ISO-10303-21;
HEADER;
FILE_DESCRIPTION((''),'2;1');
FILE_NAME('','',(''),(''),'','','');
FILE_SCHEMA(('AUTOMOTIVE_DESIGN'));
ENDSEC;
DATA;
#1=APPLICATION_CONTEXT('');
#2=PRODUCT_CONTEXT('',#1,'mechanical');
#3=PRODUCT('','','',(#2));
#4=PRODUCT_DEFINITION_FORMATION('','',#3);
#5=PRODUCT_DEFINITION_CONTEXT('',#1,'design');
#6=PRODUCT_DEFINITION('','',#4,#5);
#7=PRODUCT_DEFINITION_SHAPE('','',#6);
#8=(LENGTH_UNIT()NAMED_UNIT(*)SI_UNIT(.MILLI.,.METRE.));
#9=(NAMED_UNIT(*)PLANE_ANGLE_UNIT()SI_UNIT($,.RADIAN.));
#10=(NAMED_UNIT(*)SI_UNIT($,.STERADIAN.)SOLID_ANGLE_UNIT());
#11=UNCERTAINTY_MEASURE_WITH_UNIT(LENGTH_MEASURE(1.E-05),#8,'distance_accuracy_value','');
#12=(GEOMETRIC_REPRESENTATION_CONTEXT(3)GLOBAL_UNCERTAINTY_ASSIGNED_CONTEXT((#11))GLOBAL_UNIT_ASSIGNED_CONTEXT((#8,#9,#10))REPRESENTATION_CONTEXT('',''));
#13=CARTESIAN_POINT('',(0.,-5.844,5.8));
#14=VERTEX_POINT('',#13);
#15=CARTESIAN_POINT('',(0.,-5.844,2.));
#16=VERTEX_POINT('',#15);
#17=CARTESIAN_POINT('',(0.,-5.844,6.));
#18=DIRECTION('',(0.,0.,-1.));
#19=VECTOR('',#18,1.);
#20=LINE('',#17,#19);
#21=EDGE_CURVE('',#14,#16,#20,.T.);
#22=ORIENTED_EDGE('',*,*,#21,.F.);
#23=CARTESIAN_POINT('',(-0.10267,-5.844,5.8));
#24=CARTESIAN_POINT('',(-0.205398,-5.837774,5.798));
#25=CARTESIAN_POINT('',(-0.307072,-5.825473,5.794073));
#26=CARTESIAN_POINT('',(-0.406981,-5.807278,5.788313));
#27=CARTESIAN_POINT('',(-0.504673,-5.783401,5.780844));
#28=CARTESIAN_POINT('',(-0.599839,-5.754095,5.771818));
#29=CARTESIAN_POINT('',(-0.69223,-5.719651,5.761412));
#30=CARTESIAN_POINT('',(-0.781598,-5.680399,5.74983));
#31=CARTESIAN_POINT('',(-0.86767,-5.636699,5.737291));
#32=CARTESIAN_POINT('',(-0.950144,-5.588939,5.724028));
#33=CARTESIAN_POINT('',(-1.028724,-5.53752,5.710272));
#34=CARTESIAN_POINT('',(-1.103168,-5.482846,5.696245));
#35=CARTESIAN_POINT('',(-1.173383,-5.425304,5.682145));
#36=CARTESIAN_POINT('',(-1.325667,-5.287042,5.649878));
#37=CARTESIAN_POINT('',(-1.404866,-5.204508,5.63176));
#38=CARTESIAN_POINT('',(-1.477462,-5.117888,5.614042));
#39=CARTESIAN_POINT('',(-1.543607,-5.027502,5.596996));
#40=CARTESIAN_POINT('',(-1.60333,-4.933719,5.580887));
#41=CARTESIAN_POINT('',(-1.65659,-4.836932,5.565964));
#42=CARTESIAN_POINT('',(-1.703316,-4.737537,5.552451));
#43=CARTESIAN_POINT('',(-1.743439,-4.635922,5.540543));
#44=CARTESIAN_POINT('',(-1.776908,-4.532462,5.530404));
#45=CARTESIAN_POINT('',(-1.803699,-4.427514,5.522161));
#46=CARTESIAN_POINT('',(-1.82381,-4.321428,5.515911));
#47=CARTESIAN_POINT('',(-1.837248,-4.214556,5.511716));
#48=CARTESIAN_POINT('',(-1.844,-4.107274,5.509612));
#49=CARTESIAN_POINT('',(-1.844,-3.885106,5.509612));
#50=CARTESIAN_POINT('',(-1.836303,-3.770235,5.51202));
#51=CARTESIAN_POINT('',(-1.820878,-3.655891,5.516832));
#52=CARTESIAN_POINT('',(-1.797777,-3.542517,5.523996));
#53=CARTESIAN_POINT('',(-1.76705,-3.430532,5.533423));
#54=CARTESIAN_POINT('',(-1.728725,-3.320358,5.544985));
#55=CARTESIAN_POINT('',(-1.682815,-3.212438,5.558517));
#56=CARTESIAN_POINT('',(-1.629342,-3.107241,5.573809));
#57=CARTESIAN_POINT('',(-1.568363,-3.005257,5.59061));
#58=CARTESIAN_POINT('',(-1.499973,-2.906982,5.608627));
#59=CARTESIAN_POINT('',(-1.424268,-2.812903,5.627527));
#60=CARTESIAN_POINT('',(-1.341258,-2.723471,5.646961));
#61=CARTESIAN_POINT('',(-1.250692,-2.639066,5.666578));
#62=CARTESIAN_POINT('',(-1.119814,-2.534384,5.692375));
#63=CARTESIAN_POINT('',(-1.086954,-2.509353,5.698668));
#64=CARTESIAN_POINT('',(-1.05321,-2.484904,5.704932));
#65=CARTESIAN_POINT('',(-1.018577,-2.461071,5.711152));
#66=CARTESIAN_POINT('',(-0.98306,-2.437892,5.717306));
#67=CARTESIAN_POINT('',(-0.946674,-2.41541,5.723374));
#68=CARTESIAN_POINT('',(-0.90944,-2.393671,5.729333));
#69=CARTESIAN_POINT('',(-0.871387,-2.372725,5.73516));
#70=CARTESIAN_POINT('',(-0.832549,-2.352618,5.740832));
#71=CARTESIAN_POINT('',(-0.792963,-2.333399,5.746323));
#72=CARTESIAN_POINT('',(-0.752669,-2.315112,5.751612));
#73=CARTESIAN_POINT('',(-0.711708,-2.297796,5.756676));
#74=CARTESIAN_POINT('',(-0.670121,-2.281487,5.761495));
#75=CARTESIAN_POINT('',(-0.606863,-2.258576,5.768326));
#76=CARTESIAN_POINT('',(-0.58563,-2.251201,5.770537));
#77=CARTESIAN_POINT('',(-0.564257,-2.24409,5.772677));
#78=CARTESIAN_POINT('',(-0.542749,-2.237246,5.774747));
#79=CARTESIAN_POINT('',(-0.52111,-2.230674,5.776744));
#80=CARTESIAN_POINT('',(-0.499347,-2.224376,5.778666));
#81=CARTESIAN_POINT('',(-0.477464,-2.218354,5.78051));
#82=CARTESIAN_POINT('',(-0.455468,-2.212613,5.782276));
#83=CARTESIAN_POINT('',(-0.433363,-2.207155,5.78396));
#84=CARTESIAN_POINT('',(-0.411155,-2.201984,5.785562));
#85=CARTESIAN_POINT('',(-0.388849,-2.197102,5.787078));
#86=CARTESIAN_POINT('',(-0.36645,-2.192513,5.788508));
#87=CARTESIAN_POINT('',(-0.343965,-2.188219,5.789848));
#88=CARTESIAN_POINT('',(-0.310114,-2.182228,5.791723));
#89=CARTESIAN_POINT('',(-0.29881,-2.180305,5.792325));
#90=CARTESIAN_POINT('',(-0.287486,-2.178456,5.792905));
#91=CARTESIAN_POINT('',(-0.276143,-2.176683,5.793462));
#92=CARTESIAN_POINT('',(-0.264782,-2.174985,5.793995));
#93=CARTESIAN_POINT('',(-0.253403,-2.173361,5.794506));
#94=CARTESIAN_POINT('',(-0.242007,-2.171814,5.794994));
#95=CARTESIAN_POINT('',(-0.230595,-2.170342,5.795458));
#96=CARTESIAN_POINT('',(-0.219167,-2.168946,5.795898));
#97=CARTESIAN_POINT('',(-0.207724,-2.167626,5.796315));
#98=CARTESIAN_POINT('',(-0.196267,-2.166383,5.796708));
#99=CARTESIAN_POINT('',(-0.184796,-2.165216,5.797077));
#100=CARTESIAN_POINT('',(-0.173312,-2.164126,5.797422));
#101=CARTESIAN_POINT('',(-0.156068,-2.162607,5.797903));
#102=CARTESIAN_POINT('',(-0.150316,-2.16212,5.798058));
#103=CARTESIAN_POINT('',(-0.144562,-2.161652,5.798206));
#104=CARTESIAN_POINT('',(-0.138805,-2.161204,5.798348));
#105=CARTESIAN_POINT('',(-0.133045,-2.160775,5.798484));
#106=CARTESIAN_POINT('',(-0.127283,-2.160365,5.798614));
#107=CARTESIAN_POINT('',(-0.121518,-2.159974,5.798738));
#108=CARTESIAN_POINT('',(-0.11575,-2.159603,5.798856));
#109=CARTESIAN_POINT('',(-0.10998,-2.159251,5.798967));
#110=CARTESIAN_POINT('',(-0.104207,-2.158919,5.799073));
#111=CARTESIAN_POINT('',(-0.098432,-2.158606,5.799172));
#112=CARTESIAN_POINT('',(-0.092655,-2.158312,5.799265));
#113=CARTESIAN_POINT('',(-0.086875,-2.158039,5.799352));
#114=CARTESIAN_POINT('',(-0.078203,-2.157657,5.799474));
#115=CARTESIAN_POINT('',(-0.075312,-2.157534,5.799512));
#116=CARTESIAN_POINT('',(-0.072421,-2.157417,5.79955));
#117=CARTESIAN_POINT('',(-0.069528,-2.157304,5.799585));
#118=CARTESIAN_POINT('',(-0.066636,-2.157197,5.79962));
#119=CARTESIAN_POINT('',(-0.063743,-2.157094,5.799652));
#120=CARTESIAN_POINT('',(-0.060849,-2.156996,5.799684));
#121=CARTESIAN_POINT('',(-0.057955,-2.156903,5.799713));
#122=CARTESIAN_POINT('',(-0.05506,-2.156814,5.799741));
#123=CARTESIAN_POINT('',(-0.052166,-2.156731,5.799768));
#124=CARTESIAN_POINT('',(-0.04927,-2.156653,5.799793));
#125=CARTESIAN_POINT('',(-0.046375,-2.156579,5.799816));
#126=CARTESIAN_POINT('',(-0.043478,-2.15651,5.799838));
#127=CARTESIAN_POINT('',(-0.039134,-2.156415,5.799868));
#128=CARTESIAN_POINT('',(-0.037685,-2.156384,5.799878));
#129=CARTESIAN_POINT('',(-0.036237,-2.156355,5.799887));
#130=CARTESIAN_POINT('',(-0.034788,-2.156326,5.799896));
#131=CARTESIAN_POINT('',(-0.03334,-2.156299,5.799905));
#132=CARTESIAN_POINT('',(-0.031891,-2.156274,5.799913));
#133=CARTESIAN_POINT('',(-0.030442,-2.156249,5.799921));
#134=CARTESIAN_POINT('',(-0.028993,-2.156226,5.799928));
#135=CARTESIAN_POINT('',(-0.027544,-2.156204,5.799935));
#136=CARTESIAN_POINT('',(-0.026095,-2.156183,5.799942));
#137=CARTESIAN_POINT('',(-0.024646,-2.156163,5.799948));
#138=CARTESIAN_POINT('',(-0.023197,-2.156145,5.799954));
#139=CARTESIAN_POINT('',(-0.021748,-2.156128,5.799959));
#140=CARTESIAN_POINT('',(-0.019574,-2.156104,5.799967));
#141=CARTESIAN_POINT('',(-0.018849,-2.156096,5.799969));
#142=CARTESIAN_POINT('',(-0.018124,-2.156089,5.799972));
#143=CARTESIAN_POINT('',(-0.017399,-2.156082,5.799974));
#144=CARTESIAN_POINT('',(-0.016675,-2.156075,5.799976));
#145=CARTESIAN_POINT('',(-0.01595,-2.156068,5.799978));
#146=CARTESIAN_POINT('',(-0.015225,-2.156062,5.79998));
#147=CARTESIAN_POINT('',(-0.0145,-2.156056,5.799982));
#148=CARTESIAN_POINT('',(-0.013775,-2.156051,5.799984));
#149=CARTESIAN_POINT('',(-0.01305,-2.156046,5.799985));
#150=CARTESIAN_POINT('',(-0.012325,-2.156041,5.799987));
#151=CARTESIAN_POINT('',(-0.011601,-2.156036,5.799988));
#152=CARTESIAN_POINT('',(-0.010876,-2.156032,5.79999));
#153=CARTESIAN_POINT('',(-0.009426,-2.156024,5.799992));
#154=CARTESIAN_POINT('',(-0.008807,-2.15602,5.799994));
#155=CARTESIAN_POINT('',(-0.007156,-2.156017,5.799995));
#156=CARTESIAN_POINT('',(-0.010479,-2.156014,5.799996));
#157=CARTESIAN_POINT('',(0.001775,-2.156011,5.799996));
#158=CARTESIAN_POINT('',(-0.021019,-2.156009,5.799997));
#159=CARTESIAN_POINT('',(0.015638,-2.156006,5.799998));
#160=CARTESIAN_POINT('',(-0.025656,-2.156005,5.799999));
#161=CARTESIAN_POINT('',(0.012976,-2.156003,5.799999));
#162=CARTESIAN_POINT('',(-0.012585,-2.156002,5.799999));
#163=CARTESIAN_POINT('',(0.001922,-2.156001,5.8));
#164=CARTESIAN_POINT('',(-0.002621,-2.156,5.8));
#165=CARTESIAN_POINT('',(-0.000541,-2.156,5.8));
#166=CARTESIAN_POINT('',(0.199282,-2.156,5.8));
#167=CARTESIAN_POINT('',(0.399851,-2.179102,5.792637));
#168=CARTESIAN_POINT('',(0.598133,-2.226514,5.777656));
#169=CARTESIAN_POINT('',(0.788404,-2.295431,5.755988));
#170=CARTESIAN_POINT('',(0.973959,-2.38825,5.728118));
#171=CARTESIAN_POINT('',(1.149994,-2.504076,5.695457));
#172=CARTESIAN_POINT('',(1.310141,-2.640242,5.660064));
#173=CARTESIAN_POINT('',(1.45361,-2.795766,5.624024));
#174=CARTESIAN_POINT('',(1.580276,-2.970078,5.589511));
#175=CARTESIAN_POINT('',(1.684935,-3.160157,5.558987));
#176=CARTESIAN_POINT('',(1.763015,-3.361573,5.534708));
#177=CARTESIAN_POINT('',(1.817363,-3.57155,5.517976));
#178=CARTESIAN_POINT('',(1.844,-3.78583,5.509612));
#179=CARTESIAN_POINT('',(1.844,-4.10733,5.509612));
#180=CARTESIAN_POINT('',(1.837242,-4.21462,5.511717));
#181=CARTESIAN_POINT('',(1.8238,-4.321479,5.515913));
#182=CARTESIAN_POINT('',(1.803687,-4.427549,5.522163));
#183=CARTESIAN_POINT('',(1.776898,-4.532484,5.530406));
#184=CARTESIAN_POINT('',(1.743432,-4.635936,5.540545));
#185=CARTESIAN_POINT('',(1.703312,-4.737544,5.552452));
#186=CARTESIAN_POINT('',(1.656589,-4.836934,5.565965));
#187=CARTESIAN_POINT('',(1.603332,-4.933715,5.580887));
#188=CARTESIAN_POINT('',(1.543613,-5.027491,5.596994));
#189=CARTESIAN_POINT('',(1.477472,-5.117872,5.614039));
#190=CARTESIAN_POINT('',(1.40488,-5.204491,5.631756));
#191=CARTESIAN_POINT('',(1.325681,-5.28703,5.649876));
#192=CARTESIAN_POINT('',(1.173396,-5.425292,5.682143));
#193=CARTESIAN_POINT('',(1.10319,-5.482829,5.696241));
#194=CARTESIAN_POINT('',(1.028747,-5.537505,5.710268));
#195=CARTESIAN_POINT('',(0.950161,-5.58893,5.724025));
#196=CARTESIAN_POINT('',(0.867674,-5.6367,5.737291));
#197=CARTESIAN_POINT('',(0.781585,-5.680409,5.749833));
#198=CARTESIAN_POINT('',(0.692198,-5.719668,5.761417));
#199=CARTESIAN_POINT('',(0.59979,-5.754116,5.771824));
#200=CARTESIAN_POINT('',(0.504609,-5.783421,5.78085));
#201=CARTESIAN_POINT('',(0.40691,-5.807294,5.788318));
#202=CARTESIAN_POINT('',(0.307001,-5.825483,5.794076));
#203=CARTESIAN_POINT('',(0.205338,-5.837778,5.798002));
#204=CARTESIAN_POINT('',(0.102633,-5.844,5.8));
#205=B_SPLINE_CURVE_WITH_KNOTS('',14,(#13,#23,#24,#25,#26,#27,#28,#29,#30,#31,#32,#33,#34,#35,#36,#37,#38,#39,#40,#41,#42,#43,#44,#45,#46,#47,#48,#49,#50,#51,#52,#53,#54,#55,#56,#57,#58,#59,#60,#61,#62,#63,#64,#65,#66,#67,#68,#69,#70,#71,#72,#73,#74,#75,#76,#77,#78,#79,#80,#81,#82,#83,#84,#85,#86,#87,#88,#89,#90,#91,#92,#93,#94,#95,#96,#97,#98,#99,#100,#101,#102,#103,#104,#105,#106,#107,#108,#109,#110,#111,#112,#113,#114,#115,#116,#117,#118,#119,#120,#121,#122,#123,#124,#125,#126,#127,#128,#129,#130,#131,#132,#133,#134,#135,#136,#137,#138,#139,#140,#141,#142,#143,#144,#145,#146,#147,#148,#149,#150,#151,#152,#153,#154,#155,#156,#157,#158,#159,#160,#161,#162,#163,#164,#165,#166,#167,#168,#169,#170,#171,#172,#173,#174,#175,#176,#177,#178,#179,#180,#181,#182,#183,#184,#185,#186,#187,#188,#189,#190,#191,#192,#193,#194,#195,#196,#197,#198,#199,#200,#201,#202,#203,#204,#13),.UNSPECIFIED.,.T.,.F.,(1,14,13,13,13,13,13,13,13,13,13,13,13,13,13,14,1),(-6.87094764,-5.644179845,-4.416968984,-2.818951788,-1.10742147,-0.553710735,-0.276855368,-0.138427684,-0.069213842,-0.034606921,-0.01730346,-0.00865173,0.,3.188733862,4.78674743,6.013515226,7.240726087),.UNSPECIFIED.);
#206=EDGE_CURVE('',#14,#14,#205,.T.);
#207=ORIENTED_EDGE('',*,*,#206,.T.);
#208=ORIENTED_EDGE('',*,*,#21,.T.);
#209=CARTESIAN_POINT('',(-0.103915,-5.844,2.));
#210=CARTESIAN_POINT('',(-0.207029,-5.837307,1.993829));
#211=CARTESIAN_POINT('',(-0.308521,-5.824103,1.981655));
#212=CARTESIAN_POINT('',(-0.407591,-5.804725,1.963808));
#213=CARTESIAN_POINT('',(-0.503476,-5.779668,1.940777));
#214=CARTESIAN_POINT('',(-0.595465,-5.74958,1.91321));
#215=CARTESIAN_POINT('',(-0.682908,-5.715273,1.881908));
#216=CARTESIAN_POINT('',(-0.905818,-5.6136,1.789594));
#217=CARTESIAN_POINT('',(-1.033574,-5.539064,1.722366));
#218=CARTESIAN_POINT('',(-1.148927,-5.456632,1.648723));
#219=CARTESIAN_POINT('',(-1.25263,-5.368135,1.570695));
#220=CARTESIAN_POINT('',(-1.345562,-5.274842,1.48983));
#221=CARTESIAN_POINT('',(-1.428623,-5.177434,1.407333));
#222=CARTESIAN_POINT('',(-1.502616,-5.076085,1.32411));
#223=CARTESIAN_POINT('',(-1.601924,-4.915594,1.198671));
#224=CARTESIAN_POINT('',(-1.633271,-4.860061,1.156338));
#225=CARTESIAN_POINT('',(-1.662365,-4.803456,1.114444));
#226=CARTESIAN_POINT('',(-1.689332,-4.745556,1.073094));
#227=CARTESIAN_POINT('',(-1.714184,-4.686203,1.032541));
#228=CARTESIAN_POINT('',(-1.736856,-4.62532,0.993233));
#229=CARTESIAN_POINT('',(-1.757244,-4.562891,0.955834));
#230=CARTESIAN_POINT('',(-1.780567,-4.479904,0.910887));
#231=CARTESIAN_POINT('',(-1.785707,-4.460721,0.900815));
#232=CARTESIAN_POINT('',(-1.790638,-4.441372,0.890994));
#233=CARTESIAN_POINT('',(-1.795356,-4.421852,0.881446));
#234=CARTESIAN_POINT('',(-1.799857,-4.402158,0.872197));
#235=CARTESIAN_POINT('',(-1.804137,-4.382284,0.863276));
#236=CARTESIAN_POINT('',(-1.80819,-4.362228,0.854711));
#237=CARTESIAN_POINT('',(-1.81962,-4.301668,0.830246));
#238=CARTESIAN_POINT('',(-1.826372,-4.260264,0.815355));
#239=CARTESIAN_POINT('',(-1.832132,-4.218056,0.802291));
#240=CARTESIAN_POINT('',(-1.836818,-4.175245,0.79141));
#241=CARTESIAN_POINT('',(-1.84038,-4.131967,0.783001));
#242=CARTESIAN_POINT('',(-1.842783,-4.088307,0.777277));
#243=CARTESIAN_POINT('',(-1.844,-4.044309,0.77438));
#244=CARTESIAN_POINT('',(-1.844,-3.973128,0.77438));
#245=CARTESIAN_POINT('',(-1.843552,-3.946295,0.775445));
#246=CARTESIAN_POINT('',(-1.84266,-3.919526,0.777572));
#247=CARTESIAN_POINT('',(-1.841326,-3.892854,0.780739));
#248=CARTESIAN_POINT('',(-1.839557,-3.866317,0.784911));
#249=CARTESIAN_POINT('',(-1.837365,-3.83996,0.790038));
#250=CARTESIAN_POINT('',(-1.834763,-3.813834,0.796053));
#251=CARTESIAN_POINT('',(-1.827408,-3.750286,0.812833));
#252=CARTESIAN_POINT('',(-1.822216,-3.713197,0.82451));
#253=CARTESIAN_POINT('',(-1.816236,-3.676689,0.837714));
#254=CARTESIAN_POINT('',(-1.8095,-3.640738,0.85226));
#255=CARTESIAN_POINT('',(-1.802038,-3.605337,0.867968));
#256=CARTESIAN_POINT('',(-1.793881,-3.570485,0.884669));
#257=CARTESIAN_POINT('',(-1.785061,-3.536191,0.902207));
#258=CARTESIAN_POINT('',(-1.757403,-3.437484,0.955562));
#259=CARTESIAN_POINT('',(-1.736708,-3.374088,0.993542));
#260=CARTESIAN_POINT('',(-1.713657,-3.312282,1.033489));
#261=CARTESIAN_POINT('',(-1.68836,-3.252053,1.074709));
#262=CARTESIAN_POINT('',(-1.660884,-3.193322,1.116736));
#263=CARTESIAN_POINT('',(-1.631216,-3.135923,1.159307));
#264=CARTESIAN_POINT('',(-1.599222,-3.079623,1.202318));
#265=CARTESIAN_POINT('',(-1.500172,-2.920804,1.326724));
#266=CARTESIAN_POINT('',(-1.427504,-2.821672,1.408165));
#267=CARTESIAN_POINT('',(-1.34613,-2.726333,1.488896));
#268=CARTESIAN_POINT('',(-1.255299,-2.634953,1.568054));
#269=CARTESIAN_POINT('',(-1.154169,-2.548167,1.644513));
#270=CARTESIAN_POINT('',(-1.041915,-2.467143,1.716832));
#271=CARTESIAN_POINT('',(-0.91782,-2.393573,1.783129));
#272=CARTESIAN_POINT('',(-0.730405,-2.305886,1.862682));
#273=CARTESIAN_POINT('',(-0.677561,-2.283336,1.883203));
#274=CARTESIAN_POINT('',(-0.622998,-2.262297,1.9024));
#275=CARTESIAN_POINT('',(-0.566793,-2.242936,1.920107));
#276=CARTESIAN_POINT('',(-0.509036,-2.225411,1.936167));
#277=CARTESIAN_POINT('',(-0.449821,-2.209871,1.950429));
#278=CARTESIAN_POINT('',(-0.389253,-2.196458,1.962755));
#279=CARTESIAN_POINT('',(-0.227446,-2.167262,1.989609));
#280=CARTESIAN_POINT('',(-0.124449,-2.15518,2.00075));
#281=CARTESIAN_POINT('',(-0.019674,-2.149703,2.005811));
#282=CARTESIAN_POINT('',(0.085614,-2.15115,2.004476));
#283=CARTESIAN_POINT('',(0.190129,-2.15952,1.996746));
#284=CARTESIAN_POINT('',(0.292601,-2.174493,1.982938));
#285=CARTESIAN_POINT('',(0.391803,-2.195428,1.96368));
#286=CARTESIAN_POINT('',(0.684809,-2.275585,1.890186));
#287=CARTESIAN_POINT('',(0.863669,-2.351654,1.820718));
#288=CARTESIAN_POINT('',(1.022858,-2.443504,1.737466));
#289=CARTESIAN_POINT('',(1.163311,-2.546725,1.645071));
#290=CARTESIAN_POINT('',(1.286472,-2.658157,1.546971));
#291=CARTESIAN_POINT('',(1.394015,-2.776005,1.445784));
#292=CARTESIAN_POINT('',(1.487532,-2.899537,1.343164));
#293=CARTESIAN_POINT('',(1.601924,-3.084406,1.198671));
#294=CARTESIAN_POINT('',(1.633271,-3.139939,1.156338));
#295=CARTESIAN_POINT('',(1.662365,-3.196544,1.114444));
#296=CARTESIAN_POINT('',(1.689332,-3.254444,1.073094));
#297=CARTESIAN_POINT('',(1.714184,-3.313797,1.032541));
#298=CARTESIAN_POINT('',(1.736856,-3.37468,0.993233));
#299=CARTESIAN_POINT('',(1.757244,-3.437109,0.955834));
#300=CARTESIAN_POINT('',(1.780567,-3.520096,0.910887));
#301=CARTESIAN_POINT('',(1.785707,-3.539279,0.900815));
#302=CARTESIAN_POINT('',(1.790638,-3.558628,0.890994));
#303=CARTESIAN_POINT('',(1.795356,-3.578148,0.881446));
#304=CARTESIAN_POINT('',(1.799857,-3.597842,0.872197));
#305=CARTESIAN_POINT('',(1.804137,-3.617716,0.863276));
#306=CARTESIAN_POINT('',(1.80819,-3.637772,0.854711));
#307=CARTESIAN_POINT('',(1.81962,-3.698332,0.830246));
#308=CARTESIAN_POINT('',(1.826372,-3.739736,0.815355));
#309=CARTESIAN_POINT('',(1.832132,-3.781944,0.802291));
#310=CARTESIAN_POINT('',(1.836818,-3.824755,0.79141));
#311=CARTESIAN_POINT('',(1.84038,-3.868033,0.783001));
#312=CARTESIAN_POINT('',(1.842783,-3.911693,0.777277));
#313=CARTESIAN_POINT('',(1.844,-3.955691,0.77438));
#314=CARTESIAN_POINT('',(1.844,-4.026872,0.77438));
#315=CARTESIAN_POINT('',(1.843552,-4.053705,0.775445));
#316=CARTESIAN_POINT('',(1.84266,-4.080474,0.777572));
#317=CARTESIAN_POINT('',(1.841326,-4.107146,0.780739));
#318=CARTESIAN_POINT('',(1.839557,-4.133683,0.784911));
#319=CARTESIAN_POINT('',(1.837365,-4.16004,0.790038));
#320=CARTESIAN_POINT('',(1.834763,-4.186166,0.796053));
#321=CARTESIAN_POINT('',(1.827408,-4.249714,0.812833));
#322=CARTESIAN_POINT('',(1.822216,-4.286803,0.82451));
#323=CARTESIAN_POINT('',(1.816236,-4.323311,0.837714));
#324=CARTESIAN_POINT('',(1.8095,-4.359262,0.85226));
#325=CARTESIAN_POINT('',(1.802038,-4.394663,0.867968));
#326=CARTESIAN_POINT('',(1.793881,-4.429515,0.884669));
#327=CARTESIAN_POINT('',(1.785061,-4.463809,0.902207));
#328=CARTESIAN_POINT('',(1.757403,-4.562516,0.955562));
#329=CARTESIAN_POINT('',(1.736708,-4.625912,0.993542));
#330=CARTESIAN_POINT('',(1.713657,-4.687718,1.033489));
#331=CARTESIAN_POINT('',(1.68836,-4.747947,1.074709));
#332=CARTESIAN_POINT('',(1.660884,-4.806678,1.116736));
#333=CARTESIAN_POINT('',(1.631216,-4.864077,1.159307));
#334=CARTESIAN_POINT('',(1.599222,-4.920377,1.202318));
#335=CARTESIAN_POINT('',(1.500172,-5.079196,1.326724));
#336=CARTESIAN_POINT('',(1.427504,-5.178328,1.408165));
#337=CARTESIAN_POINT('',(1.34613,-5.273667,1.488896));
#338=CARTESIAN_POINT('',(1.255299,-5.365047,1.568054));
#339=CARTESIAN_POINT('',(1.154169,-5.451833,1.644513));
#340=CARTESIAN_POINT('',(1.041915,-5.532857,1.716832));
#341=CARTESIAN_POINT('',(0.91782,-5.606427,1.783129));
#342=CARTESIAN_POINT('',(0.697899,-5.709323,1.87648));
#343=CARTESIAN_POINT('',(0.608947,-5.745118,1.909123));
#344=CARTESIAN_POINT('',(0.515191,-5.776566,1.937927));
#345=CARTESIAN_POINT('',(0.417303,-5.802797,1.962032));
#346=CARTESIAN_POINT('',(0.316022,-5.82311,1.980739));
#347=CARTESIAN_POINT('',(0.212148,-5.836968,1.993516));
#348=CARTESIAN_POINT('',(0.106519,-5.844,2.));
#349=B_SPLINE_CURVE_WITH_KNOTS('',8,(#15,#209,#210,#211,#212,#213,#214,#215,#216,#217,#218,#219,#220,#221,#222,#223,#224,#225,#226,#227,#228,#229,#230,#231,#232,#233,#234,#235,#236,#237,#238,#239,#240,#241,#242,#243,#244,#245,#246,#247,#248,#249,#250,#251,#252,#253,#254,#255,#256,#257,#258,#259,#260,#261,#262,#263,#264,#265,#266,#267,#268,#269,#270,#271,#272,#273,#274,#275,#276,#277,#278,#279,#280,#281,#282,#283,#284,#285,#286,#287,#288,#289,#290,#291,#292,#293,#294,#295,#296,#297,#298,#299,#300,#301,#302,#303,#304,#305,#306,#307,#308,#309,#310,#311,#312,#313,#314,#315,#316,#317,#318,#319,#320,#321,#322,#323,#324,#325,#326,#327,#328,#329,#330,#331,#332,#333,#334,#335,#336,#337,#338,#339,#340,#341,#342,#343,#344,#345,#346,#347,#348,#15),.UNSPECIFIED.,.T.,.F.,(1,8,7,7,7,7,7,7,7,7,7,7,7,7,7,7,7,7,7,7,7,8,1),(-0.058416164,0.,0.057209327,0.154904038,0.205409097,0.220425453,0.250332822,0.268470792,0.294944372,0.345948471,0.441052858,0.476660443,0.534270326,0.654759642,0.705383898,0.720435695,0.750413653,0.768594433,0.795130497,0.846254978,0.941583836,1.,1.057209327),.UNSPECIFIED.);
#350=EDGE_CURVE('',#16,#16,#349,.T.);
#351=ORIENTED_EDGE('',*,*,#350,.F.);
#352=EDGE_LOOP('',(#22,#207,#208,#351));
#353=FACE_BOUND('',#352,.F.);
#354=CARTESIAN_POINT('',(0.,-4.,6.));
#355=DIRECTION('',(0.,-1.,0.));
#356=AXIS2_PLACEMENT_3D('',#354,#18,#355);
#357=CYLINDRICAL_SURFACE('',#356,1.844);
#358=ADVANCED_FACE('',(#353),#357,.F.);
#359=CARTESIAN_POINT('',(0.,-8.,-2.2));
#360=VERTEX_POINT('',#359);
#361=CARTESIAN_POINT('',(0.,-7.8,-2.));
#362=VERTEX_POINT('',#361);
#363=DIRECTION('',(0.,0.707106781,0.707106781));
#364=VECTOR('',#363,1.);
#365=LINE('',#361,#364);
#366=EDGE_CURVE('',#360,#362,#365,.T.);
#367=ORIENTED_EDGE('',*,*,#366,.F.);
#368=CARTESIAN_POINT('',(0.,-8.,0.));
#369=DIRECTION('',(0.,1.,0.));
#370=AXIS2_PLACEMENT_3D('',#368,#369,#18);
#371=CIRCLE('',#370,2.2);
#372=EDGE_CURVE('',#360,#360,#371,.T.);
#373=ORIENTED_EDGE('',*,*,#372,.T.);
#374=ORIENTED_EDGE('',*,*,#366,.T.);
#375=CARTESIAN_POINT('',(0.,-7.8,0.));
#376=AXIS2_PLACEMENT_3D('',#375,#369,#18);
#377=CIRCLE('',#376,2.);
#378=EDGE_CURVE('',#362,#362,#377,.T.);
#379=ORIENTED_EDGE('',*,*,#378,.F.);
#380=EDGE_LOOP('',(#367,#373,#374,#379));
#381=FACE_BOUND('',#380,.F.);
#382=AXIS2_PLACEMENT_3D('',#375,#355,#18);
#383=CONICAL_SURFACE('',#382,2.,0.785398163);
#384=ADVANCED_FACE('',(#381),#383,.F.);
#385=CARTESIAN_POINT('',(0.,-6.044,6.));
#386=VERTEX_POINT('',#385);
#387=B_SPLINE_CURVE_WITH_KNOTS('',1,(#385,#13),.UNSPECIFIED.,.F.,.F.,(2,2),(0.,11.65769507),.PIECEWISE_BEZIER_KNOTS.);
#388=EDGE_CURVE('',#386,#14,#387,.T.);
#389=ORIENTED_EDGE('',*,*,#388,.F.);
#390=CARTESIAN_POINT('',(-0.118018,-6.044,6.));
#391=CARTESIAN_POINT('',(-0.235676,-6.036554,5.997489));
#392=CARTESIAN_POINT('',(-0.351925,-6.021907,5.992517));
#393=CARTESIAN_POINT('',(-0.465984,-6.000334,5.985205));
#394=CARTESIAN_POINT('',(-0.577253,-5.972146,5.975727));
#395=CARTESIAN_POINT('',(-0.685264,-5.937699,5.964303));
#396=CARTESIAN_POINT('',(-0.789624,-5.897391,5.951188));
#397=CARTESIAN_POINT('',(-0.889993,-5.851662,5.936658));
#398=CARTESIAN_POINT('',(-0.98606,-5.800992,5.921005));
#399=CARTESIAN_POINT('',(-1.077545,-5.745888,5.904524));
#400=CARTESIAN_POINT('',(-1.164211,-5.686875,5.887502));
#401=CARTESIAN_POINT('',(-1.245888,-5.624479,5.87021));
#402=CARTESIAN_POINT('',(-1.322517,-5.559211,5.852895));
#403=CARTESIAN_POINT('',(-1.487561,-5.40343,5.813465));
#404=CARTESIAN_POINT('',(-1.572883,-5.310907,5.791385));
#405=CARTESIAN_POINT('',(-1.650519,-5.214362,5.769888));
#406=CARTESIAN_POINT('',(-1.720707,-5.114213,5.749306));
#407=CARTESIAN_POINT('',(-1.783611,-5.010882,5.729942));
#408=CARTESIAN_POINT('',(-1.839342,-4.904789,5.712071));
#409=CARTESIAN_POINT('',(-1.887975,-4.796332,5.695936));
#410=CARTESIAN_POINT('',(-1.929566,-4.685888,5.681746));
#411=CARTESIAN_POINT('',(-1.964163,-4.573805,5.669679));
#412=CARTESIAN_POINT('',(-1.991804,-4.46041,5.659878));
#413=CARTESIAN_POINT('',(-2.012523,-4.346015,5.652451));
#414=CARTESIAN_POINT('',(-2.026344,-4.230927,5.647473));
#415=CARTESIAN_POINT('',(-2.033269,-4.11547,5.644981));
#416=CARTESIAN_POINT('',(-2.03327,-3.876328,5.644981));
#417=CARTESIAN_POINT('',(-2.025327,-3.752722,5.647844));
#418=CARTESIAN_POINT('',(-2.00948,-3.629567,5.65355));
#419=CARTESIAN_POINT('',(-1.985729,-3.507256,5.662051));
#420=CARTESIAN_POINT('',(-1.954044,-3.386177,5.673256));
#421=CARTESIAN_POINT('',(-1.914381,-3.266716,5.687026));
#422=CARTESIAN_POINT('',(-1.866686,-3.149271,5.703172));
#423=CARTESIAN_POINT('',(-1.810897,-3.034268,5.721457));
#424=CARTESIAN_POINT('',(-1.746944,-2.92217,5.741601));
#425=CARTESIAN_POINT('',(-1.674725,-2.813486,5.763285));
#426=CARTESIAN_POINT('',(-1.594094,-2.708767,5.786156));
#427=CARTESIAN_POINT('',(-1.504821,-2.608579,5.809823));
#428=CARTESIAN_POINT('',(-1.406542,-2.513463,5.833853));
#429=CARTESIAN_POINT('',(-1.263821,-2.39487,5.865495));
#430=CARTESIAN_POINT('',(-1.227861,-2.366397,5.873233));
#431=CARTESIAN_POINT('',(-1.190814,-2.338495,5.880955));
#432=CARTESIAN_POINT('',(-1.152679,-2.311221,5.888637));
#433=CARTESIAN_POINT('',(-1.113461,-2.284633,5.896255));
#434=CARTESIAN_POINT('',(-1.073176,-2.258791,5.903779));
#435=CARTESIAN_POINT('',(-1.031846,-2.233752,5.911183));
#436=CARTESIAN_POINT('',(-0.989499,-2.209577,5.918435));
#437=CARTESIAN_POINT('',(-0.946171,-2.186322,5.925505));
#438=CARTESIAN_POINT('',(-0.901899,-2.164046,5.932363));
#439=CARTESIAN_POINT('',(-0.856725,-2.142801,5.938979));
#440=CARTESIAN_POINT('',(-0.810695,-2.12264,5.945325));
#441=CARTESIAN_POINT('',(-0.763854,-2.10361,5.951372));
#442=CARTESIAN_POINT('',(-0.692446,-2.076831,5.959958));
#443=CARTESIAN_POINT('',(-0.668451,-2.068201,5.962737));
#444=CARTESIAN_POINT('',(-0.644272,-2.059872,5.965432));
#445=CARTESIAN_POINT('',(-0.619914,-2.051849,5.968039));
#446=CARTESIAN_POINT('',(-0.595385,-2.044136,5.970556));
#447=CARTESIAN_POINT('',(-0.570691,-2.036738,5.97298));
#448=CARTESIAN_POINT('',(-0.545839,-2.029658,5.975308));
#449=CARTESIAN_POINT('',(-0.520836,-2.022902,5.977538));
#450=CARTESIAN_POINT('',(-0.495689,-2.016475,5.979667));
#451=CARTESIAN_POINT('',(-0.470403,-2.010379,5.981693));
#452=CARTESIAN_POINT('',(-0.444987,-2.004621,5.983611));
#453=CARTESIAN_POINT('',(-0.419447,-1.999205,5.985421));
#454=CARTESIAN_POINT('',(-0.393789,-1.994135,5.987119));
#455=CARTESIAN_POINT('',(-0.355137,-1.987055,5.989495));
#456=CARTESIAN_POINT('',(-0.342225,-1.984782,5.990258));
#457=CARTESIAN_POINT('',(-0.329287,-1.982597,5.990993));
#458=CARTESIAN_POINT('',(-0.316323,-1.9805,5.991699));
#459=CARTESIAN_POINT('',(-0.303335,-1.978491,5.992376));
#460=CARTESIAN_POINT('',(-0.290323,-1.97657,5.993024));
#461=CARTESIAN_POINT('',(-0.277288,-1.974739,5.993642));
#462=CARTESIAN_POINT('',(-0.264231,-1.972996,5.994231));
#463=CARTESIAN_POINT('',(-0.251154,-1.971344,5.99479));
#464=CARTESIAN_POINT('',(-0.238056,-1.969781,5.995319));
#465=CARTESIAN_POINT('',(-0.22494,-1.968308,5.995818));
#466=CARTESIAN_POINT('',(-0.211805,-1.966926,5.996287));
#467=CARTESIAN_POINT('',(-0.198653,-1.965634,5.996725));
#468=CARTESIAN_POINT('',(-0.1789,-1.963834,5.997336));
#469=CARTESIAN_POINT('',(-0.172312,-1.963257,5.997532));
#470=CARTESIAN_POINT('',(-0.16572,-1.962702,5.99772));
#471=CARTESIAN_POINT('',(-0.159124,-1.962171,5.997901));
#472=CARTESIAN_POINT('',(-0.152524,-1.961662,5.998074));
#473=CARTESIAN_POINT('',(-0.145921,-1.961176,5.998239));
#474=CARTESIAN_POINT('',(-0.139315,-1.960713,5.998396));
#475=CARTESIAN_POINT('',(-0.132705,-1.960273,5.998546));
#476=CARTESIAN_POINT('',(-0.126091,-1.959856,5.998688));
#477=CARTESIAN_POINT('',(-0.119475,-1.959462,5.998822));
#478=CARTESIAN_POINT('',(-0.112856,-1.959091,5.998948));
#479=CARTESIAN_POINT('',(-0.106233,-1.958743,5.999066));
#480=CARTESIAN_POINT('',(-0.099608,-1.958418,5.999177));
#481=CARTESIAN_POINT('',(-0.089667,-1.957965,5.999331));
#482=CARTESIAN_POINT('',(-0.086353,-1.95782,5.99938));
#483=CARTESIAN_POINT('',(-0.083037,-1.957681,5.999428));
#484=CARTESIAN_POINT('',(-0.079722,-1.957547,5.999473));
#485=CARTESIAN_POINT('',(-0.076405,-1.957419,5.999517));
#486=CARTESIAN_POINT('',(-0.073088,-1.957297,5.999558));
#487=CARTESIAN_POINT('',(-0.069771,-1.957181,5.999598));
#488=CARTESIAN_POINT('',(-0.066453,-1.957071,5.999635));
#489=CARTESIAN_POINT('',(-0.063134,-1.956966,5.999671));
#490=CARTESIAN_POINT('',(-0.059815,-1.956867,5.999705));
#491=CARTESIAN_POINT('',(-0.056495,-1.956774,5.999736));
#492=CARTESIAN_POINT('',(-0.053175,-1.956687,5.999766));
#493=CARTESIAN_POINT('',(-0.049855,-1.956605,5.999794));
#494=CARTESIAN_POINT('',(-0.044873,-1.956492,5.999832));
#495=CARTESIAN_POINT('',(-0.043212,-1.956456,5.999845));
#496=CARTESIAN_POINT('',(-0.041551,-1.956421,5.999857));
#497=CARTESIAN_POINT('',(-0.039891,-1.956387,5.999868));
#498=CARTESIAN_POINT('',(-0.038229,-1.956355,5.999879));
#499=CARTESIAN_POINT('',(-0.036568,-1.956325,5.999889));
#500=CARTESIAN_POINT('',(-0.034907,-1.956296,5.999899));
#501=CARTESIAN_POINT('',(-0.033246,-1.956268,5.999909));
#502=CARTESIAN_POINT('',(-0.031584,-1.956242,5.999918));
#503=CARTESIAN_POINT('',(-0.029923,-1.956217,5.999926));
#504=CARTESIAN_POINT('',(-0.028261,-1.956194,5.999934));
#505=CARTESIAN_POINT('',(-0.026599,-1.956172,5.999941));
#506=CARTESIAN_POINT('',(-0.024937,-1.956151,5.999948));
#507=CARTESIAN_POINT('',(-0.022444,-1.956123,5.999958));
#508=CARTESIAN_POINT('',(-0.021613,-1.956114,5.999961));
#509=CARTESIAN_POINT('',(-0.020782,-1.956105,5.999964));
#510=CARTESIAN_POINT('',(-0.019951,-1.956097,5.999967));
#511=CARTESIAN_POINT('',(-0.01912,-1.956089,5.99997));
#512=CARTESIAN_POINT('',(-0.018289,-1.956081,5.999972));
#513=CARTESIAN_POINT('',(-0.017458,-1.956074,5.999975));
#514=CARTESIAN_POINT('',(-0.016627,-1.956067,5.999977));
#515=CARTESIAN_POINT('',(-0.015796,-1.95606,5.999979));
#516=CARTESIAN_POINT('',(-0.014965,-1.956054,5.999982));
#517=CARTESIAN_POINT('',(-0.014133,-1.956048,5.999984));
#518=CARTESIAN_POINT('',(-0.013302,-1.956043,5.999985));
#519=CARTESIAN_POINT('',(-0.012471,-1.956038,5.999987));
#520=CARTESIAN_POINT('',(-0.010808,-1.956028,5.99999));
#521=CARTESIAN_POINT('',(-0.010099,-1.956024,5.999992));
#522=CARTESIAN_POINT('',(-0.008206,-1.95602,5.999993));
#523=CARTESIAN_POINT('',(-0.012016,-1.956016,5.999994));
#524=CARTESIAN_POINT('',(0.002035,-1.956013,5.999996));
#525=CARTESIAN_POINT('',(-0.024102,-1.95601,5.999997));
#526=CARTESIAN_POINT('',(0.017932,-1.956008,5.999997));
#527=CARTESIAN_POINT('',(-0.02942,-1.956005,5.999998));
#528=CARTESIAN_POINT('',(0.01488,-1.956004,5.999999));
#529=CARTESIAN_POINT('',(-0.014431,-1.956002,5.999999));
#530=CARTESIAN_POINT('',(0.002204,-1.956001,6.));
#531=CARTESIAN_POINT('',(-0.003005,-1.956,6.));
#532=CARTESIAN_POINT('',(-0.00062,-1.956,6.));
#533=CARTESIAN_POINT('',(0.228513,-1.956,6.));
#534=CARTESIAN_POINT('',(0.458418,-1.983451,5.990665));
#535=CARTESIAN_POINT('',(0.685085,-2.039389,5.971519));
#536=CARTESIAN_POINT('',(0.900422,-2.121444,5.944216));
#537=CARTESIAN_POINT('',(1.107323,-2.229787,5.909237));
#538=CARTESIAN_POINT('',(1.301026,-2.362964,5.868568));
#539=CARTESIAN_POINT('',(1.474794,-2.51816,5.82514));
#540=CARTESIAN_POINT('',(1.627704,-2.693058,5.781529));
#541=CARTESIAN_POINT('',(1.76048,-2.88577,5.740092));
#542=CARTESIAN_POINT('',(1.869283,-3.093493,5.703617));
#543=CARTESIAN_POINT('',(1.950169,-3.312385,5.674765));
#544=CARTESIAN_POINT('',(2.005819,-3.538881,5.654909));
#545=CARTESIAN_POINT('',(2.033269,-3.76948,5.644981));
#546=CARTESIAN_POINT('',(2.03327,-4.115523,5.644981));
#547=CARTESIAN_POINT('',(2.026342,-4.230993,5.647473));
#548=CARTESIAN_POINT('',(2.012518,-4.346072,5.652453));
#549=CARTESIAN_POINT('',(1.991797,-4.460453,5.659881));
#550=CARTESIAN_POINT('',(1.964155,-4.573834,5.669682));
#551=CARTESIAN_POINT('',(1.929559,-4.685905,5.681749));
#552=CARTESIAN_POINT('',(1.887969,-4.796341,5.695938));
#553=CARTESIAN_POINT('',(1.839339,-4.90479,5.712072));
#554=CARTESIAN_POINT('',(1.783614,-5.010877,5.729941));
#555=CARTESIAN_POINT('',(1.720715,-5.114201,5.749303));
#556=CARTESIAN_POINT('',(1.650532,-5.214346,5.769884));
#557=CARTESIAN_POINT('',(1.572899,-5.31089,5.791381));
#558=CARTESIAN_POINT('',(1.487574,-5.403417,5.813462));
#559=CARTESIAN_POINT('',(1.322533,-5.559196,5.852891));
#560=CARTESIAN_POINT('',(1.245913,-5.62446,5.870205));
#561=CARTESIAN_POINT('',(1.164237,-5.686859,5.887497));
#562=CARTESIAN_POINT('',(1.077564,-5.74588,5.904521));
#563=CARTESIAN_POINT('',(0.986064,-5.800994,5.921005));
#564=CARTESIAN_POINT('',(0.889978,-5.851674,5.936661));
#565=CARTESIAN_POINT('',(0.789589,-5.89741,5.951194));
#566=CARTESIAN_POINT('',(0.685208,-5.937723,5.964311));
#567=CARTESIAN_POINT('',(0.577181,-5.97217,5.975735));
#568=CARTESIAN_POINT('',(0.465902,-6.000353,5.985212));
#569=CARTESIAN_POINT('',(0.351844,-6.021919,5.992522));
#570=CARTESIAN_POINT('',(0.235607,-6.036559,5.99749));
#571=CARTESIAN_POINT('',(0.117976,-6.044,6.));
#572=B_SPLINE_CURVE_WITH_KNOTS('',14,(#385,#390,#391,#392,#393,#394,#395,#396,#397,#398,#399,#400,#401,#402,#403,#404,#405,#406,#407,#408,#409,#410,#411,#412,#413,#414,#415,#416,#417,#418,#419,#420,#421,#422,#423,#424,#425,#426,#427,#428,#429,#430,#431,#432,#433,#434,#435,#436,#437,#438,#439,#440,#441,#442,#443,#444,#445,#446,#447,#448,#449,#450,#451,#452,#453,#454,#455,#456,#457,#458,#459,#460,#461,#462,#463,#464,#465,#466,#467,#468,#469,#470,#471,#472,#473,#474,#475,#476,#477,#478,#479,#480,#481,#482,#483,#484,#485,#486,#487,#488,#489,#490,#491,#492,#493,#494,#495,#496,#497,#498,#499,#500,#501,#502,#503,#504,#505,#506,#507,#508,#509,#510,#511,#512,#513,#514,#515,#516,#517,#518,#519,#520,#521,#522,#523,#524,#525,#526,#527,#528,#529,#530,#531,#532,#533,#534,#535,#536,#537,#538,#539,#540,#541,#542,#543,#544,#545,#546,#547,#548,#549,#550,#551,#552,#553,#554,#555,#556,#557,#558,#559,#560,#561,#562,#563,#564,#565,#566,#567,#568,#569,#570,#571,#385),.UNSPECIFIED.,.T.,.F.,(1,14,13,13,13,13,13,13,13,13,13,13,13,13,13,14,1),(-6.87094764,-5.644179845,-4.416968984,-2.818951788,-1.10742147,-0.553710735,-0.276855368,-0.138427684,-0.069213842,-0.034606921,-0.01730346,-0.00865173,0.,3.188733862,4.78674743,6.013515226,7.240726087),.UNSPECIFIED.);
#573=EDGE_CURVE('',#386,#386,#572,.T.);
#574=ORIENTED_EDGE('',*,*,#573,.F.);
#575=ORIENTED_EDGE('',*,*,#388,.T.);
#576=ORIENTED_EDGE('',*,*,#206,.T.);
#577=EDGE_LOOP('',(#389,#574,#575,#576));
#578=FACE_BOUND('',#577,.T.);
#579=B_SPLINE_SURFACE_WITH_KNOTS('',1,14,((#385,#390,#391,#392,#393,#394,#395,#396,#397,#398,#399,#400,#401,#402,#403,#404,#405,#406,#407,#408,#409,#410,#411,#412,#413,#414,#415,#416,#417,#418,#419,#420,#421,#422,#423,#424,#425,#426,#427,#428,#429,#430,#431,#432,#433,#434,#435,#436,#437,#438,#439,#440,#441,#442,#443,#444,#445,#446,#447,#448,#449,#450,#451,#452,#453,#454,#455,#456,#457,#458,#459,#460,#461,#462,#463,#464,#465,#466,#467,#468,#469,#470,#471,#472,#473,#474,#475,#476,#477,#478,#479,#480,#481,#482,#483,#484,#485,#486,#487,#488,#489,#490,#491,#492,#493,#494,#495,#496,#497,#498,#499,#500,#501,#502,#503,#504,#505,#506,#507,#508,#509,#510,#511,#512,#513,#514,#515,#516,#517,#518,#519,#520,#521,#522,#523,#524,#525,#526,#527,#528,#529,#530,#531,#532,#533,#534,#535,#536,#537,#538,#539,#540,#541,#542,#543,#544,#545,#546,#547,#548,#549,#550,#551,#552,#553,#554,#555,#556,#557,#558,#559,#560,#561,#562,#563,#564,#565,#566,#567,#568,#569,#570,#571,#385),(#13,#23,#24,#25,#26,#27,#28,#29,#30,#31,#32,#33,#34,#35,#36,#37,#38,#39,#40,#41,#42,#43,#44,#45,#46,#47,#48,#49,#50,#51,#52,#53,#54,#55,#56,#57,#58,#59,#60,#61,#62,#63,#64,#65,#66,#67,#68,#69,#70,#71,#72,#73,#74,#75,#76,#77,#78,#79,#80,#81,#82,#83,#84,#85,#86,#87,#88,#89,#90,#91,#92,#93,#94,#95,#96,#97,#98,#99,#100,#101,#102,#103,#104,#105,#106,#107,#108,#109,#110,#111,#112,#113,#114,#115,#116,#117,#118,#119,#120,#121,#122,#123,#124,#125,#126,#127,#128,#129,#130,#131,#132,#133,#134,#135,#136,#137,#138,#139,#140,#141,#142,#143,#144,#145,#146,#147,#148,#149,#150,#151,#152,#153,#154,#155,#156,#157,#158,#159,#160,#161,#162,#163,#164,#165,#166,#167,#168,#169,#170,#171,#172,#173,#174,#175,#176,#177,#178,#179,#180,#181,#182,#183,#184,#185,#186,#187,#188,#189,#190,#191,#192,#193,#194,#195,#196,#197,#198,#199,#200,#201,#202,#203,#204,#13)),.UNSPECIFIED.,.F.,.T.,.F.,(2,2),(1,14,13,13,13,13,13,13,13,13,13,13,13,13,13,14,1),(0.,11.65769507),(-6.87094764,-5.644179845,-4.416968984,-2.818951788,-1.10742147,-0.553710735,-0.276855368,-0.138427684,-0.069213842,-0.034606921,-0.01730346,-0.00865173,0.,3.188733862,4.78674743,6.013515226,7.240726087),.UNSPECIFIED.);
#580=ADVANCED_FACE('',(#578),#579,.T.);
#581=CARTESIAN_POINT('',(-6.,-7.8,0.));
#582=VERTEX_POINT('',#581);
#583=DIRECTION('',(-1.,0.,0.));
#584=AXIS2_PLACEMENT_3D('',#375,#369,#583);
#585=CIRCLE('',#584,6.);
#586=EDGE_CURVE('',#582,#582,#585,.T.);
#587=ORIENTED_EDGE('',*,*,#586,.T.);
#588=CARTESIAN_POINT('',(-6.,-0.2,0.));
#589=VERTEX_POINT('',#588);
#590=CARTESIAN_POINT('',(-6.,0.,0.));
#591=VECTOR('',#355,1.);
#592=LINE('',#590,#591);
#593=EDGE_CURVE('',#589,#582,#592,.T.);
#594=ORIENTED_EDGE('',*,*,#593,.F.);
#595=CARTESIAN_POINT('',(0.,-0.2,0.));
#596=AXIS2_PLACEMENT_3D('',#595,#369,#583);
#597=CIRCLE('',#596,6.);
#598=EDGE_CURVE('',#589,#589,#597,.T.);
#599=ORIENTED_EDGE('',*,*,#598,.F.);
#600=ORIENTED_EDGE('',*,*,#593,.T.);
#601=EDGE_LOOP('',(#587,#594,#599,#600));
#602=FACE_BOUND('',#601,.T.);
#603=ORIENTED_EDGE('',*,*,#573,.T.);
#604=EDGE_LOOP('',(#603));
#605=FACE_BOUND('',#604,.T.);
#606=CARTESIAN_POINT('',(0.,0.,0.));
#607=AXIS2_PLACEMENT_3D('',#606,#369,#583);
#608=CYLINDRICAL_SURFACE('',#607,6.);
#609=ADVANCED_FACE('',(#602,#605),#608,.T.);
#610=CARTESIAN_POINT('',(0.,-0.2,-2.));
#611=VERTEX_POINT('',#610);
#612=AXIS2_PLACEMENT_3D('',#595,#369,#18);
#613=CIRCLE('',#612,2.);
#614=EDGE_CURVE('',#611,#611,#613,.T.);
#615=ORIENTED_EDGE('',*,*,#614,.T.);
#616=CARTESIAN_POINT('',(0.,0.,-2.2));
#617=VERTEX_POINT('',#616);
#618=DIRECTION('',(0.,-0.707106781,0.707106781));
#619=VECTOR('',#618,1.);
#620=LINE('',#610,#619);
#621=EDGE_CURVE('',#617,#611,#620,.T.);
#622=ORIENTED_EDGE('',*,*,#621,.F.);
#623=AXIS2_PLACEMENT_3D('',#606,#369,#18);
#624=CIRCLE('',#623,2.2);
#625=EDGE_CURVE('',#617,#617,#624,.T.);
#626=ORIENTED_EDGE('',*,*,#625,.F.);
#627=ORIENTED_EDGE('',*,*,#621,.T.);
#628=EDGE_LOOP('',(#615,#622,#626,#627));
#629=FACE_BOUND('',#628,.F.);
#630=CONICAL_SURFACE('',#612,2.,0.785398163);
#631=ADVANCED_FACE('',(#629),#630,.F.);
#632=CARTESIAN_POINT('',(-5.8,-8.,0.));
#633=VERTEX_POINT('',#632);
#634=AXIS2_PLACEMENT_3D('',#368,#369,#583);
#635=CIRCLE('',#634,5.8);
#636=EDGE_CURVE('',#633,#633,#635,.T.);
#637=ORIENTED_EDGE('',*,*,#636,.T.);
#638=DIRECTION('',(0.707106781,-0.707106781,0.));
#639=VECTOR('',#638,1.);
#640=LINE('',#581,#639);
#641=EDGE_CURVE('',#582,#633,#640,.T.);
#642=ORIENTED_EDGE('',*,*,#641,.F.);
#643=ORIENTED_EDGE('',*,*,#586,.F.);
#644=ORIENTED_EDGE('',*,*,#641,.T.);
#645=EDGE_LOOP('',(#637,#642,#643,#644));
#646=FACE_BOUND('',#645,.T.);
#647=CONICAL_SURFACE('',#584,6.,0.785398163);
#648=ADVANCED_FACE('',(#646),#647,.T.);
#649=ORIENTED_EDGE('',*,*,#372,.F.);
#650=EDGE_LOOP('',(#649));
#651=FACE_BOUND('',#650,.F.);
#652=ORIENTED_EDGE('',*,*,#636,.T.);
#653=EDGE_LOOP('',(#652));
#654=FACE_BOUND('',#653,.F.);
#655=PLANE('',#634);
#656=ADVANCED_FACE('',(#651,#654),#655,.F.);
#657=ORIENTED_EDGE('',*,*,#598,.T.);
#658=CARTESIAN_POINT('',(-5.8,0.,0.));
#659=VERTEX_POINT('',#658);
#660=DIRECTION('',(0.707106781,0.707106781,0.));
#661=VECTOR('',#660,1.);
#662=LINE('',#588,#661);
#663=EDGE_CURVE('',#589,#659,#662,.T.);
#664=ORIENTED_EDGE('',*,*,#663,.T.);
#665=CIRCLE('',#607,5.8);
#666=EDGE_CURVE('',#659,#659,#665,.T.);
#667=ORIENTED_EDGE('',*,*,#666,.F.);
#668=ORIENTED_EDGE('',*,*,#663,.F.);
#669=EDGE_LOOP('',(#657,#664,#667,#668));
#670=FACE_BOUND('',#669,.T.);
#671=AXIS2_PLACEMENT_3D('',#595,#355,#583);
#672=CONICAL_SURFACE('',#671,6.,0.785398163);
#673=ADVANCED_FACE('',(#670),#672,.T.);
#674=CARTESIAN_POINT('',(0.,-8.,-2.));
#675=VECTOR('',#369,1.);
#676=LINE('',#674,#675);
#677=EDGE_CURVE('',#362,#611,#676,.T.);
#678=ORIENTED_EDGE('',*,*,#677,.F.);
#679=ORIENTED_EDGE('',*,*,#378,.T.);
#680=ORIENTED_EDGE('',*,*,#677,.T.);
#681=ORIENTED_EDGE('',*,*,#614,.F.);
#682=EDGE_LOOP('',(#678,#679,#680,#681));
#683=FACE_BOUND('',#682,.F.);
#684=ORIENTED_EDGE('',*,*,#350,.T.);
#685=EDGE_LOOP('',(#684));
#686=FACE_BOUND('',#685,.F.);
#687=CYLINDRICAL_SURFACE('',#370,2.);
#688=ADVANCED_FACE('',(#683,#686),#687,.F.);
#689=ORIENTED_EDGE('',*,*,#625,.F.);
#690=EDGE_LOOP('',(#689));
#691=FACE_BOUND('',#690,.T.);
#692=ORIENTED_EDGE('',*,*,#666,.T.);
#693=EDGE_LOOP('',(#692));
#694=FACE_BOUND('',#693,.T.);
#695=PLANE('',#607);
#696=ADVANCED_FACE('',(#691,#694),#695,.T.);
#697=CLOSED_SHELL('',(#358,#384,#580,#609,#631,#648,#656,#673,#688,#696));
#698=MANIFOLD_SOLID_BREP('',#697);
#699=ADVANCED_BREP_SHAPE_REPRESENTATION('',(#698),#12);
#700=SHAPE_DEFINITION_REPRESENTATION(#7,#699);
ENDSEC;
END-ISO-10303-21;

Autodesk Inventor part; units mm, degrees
ref_plane "YZ Plane" through (0, 0, 0) normal (1, 0, 0) x (0, 1, 0)
ref_plane "XZ Plane" through (0, 0, 0) normal (0, 1, 0) x (-1, 0, 0)
sketch "Sketch1" plane through (0, 0, 0) normal (0, 1, 0) x (-1, 0, 0)
  circle A0 centre (0, 0) radius 6
  dimension "d0" = 12
extrude "Extrusion1" add sketch "Sketch1" against normal blind 8
chamfer "Chamfer1" distance 0.2 angle 45 2 edges at (6, -8, 0) (6, 0, 0)
sketch "Sketch2" plane through (0, -8, 0) normal (0, -1, 0) x (1, 0, 0)
  point P0 (0, 0)
hole "Hole1" at (0, -8, 0) direction (0, 1, 0) diameter 4 end through all
chamfer "Chamfer2" distance 0.2 angle 45 2 edges at (0, -8, 2) (0, 0, 2)
ref_plane "Work Plane1" through (0, 0, 6) normal (0, 0, 1) x (1, 0, 0)
sketch "Sketch3" plane through (0, 0, 6) normal (0, 0, 1) x (1, 0, 0)
  line L0 (-6, -0.2) -> (-6, -7.8) projected
  line L1 (-5.8, 0) -> (5.8, 0) projected
  point P0 (0, 0)
  point P1 (0, -4)
  point P2 (-6, -4)
hole "Hole2" at (0, -4, 6) direction (0, 0, -1) diameter 3.688 end up to surface thread size "M4.5x0.75" class "6H" standard "ANSI Metric M Profile"
chamfer "Chamfer3" distance 0.2 angle 45 2 edges at (1.8366, -3.8348, 5.712) (-1.844, -4.0029, 5.7096)
properties part number "08-0003" material "Aluminum 6061"
